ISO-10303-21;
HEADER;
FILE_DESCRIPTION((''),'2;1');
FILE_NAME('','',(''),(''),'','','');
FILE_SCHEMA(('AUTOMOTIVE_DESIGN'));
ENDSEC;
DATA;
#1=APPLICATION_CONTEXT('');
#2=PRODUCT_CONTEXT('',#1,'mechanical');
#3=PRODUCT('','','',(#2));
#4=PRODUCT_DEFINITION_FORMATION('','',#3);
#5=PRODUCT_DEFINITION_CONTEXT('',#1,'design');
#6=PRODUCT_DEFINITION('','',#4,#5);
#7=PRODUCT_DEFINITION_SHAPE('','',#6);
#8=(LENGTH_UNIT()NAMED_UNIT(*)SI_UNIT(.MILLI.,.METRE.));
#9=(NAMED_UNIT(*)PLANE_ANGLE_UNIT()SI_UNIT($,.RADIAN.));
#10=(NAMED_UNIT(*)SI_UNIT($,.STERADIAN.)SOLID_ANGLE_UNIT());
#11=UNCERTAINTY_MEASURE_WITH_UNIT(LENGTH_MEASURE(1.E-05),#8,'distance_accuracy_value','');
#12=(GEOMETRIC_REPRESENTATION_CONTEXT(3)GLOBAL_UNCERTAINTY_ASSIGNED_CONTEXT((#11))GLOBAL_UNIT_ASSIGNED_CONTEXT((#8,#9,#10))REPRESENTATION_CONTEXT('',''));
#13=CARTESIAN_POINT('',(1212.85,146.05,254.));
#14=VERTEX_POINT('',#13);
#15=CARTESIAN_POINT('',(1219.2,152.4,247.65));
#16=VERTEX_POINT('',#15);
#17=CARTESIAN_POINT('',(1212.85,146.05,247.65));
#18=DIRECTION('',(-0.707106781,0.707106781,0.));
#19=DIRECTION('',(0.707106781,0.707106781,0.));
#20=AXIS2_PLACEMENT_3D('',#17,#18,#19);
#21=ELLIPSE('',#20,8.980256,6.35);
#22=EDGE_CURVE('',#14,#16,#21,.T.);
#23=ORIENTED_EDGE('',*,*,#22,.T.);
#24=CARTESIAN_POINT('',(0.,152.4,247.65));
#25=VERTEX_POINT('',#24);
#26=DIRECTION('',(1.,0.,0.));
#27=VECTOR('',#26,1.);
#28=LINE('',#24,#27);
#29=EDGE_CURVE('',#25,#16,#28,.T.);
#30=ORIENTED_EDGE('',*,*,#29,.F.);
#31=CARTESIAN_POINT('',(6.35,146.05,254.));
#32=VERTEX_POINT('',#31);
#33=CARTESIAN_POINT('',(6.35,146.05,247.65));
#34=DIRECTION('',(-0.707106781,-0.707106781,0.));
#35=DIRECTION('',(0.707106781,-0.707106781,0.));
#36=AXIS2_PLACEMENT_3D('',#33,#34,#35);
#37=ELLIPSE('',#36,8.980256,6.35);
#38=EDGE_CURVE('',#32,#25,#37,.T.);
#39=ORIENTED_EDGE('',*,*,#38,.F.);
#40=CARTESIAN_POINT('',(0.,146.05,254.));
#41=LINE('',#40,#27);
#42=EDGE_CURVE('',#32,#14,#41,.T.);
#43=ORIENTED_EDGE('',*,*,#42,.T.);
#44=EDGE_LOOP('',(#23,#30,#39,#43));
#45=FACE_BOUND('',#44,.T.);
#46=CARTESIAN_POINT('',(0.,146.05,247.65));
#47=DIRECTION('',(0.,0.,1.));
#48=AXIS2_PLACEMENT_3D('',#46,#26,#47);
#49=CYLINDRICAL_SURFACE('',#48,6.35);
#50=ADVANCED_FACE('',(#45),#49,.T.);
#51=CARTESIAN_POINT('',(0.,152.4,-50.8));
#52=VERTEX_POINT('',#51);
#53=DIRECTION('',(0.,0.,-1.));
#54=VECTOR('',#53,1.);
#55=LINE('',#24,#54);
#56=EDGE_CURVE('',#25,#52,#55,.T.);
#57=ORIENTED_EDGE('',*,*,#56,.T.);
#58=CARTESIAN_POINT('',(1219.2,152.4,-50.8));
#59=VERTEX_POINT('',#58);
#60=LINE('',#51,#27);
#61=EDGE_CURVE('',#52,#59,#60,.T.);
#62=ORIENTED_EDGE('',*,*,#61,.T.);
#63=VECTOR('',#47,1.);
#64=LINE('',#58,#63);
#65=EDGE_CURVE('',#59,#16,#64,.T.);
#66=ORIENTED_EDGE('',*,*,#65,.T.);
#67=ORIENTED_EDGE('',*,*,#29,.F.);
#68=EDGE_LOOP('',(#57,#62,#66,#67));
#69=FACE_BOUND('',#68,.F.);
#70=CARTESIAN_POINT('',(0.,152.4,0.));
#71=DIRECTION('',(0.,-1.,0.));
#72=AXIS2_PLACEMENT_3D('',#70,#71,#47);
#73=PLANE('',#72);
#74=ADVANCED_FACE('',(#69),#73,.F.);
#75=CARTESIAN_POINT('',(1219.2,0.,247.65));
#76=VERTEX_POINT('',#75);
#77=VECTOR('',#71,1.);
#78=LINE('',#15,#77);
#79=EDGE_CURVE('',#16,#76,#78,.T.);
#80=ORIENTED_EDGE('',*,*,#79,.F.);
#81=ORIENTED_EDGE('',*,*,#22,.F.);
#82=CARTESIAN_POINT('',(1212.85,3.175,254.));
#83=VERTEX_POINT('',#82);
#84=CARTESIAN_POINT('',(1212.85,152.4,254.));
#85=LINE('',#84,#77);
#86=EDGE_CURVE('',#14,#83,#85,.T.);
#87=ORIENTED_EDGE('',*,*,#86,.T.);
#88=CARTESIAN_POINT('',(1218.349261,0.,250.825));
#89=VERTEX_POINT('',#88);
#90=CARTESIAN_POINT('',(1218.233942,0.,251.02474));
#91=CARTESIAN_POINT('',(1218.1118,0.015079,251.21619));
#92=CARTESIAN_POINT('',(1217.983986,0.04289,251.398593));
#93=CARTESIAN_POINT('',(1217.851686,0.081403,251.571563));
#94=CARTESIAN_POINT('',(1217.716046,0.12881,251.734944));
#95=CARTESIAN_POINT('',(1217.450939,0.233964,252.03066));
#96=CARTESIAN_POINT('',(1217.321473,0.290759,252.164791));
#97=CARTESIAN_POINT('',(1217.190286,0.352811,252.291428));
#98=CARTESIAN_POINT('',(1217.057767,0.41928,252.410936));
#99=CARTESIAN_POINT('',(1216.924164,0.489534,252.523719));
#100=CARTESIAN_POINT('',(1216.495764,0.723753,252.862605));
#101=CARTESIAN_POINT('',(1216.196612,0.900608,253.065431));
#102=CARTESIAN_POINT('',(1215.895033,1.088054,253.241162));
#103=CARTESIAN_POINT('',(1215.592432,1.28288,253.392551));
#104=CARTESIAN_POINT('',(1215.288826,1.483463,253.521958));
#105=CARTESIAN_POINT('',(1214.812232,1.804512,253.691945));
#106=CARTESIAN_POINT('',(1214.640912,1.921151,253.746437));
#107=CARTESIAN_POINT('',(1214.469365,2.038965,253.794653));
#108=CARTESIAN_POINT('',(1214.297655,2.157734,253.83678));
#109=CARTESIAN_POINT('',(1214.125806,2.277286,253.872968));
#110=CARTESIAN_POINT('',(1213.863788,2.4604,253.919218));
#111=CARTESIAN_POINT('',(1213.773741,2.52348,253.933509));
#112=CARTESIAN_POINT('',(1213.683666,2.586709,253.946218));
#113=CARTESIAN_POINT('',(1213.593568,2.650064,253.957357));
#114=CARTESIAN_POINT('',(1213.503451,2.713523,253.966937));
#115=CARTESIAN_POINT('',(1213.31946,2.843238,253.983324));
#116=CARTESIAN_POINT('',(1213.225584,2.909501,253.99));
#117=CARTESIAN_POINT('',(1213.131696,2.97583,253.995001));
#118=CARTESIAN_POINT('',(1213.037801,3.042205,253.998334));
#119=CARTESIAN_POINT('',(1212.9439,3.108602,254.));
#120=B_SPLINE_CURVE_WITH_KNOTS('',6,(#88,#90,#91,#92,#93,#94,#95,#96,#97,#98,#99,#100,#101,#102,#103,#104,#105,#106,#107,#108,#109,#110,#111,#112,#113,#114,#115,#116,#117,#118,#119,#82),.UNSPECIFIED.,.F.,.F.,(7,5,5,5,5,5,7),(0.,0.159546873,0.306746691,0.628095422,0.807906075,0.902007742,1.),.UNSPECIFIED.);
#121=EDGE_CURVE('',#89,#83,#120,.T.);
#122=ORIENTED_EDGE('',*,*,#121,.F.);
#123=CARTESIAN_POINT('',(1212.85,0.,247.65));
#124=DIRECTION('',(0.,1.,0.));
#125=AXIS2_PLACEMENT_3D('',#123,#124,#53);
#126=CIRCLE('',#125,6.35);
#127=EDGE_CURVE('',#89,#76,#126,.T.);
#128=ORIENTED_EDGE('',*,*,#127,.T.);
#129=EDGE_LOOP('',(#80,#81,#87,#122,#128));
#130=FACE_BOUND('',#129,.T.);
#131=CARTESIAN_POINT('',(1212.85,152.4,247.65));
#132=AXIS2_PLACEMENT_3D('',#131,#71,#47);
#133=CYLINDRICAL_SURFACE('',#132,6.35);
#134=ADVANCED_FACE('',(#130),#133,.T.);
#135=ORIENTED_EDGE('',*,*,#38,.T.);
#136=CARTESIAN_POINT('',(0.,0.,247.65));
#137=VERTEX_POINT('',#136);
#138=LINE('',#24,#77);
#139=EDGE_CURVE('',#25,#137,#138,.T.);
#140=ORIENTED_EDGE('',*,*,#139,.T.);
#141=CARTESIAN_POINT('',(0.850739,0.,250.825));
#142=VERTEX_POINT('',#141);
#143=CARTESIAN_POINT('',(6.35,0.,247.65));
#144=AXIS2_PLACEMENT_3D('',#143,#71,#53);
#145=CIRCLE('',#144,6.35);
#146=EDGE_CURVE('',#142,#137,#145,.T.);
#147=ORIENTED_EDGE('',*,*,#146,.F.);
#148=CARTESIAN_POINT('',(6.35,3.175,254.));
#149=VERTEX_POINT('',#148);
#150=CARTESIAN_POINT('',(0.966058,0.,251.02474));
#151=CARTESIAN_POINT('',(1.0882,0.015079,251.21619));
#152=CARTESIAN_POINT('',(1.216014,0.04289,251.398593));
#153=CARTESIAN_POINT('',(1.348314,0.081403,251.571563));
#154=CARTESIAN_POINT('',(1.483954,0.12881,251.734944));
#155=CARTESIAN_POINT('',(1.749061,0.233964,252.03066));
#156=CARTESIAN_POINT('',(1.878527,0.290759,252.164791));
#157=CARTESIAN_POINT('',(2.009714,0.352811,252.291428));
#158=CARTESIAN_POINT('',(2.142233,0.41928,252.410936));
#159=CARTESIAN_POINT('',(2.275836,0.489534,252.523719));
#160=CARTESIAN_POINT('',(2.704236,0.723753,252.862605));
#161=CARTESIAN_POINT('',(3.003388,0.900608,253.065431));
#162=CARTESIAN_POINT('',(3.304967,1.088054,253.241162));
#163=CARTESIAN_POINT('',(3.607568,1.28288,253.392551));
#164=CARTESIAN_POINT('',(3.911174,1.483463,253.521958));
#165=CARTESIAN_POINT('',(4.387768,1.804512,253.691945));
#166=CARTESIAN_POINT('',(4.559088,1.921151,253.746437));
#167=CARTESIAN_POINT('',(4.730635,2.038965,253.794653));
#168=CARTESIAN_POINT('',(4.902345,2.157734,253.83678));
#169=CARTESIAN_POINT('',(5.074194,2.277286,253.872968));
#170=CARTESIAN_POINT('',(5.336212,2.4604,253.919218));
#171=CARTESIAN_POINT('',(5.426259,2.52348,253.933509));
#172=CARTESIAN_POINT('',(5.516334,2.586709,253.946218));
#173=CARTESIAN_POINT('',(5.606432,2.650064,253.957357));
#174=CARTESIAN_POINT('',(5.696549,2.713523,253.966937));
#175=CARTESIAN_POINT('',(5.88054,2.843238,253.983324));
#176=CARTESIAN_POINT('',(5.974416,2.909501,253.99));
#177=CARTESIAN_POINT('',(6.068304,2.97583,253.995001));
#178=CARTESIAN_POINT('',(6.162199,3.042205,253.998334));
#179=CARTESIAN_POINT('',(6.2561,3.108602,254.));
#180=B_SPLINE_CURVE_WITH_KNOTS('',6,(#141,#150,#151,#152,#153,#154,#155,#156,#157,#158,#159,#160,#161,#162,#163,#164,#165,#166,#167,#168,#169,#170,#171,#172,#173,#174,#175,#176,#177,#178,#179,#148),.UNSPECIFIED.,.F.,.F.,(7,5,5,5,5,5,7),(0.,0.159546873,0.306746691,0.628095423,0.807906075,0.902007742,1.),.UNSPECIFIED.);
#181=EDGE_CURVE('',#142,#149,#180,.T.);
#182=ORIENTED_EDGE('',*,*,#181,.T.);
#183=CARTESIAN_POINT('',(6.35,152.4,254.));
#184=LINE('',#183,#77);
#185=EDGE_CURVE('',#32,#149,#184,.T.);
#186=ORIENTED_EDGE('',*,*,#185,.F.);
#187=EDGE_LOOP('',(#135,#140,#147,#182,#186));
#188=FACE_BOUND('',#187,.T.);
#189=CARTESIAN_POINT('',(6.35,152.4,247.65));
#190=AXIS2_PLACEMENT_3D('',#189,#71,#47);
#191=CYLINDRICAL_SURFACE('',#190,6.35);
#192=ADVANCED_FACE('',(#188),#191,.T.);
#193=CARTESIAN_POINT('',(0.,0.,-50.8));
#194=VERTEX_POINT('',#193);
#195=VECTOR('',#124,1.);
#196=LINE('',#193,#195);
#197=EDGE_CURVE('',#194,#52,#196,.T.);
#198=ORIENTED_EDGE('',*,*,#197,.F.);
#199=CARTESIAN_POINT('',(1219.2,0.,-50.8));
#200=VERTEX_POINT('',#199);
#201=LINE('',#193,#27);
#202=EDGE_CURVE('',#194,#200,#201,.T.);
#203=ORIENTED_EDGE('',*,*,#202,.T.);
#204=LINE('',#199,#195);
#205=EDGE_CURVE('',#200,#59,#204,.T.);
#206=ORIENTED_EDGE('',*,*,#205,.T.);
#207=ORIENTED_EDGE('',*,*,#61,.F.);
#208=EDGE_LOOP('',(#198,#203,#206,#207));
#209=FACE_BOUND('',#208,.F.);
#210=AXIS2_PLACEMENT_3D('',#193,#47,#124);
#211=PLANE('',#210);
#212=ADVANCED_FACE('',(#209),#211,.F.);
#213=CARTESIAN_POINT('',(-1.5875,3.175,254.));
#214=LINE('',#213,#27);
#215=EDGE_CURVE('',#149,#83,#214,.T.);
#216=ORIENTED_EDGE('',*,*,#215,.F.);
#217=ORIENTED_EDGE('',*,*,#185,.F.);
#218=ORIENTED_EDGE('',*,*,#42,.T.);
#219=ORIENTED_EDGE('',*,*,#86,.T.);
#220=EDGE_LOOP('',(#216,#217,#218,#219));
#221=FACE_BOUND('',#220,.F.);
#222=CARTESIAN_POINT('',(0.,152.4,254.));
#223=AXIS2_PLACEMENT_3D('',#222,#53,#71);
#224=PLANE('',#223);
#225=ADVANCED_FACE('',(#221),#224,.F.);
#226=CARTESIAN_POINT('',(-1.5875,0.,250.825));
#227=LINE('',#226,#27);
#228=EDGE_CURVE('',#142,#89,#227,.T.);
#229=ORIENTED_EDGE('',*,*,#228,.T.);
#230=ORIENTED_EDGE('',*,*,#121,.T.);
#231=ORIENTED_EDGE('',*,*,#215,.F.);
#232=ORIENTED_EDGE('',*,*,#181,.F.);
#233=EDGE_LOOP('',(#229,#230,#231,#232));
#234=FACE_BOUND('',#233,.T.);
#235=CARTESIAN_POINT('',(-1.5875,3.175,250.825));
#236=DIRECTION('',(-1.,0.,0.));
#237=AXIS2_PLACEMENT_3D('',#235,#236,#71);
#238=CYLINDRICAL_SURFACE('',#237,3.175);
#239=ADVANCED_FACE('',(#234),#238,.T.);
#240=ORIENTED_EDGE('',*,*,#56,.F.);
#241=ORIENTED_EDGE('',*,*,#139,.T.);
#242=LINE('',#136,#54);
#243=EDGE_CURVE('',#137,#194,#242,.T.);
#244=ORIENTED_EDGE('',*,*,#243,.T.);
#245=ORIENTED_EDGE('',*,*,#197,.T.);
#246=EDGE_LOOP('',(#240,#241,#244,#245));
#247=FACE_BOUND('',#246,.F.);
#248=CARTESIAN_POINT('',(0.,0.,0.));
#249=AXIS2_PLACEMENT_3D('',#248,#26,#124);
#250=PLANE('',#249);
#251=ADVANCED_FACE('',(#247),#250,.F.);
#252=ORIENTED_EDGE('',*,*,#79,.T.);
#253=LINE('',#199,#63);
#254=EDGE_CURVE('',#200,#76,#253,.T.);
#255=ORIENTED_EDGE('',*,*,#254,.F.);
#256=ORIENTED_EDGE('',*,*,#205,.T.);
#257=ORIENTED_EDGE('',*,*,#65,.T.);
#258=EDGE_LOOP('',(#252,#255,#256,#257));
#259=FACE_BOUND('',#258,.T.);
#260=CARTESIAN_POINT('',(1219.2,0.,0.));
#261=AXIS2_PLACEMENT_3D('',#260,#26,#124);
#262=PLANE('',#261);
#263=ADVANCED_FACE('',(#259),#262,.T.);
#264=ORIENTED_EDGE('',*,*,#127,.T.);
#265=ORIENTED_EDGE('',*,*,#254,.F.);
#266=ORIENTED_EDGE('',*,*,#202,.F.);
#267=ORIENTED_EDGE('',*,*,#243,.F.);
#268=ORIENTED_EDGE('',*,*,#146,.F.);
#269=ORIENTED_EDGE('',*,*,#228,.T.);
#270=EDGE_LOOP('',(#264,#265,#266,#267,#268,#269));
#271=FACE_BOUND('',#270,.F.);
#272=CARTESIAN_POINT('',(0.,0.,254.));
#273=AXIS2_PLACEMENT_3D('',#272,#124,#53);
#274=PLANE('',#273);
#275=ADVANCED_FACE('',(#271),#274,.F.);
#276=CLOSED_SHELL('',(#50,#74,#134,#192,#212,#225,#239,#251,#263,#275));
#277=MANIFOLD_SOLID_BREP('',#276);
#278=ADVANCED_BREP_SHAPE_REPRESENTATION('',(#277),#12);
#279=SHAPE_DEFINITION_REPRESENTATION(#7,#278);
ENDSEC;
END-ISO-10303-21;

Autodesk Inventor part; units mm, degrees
ref_plane "YZ Plane" through (0, 0, 0) normal (1, 0, 0) x (0, 1, 0)
ref_plane "XZ Plane" through (0, 0, 0) normal (0, 1, 0) x (-1, 0, 0)
ref_plane "XY Plane" through (0, 0, 0) normal (0, 0, 1) x (1, 0, 0)
sketch "Sketch1" plane through (0, 0, 0) normal (1, 0, 0) x (0, 1, 0)
  line L0 (0, 0) -> (152.4, 0)
  line L1 (152.4, 0) -> (152.4, 254)
  line L2 (152.4, 254) -> (0, 254)
  line L3 (0, 254) -> (0, 0)
  dimension "d0" = 152.4
  dimension "d1" = 254
extrude "Extrusion1" add sketch "Sketch1" along normal blind 1219.2
fillet "Fillet1" radius 6.35 3 edges at (609.6, 152.4, 254) (1219.2, 76.2, 254) (0, 76.2, 254)
fillet "Fillet2" radius 3.175 1 edges at (609.6, 0, 254)
move faces "Move1" translate (0, 0, -50.8) faces at (406.4, 50.8, 0)
properties part number "6in-511LF" material "Granite, Cut, Polished"
